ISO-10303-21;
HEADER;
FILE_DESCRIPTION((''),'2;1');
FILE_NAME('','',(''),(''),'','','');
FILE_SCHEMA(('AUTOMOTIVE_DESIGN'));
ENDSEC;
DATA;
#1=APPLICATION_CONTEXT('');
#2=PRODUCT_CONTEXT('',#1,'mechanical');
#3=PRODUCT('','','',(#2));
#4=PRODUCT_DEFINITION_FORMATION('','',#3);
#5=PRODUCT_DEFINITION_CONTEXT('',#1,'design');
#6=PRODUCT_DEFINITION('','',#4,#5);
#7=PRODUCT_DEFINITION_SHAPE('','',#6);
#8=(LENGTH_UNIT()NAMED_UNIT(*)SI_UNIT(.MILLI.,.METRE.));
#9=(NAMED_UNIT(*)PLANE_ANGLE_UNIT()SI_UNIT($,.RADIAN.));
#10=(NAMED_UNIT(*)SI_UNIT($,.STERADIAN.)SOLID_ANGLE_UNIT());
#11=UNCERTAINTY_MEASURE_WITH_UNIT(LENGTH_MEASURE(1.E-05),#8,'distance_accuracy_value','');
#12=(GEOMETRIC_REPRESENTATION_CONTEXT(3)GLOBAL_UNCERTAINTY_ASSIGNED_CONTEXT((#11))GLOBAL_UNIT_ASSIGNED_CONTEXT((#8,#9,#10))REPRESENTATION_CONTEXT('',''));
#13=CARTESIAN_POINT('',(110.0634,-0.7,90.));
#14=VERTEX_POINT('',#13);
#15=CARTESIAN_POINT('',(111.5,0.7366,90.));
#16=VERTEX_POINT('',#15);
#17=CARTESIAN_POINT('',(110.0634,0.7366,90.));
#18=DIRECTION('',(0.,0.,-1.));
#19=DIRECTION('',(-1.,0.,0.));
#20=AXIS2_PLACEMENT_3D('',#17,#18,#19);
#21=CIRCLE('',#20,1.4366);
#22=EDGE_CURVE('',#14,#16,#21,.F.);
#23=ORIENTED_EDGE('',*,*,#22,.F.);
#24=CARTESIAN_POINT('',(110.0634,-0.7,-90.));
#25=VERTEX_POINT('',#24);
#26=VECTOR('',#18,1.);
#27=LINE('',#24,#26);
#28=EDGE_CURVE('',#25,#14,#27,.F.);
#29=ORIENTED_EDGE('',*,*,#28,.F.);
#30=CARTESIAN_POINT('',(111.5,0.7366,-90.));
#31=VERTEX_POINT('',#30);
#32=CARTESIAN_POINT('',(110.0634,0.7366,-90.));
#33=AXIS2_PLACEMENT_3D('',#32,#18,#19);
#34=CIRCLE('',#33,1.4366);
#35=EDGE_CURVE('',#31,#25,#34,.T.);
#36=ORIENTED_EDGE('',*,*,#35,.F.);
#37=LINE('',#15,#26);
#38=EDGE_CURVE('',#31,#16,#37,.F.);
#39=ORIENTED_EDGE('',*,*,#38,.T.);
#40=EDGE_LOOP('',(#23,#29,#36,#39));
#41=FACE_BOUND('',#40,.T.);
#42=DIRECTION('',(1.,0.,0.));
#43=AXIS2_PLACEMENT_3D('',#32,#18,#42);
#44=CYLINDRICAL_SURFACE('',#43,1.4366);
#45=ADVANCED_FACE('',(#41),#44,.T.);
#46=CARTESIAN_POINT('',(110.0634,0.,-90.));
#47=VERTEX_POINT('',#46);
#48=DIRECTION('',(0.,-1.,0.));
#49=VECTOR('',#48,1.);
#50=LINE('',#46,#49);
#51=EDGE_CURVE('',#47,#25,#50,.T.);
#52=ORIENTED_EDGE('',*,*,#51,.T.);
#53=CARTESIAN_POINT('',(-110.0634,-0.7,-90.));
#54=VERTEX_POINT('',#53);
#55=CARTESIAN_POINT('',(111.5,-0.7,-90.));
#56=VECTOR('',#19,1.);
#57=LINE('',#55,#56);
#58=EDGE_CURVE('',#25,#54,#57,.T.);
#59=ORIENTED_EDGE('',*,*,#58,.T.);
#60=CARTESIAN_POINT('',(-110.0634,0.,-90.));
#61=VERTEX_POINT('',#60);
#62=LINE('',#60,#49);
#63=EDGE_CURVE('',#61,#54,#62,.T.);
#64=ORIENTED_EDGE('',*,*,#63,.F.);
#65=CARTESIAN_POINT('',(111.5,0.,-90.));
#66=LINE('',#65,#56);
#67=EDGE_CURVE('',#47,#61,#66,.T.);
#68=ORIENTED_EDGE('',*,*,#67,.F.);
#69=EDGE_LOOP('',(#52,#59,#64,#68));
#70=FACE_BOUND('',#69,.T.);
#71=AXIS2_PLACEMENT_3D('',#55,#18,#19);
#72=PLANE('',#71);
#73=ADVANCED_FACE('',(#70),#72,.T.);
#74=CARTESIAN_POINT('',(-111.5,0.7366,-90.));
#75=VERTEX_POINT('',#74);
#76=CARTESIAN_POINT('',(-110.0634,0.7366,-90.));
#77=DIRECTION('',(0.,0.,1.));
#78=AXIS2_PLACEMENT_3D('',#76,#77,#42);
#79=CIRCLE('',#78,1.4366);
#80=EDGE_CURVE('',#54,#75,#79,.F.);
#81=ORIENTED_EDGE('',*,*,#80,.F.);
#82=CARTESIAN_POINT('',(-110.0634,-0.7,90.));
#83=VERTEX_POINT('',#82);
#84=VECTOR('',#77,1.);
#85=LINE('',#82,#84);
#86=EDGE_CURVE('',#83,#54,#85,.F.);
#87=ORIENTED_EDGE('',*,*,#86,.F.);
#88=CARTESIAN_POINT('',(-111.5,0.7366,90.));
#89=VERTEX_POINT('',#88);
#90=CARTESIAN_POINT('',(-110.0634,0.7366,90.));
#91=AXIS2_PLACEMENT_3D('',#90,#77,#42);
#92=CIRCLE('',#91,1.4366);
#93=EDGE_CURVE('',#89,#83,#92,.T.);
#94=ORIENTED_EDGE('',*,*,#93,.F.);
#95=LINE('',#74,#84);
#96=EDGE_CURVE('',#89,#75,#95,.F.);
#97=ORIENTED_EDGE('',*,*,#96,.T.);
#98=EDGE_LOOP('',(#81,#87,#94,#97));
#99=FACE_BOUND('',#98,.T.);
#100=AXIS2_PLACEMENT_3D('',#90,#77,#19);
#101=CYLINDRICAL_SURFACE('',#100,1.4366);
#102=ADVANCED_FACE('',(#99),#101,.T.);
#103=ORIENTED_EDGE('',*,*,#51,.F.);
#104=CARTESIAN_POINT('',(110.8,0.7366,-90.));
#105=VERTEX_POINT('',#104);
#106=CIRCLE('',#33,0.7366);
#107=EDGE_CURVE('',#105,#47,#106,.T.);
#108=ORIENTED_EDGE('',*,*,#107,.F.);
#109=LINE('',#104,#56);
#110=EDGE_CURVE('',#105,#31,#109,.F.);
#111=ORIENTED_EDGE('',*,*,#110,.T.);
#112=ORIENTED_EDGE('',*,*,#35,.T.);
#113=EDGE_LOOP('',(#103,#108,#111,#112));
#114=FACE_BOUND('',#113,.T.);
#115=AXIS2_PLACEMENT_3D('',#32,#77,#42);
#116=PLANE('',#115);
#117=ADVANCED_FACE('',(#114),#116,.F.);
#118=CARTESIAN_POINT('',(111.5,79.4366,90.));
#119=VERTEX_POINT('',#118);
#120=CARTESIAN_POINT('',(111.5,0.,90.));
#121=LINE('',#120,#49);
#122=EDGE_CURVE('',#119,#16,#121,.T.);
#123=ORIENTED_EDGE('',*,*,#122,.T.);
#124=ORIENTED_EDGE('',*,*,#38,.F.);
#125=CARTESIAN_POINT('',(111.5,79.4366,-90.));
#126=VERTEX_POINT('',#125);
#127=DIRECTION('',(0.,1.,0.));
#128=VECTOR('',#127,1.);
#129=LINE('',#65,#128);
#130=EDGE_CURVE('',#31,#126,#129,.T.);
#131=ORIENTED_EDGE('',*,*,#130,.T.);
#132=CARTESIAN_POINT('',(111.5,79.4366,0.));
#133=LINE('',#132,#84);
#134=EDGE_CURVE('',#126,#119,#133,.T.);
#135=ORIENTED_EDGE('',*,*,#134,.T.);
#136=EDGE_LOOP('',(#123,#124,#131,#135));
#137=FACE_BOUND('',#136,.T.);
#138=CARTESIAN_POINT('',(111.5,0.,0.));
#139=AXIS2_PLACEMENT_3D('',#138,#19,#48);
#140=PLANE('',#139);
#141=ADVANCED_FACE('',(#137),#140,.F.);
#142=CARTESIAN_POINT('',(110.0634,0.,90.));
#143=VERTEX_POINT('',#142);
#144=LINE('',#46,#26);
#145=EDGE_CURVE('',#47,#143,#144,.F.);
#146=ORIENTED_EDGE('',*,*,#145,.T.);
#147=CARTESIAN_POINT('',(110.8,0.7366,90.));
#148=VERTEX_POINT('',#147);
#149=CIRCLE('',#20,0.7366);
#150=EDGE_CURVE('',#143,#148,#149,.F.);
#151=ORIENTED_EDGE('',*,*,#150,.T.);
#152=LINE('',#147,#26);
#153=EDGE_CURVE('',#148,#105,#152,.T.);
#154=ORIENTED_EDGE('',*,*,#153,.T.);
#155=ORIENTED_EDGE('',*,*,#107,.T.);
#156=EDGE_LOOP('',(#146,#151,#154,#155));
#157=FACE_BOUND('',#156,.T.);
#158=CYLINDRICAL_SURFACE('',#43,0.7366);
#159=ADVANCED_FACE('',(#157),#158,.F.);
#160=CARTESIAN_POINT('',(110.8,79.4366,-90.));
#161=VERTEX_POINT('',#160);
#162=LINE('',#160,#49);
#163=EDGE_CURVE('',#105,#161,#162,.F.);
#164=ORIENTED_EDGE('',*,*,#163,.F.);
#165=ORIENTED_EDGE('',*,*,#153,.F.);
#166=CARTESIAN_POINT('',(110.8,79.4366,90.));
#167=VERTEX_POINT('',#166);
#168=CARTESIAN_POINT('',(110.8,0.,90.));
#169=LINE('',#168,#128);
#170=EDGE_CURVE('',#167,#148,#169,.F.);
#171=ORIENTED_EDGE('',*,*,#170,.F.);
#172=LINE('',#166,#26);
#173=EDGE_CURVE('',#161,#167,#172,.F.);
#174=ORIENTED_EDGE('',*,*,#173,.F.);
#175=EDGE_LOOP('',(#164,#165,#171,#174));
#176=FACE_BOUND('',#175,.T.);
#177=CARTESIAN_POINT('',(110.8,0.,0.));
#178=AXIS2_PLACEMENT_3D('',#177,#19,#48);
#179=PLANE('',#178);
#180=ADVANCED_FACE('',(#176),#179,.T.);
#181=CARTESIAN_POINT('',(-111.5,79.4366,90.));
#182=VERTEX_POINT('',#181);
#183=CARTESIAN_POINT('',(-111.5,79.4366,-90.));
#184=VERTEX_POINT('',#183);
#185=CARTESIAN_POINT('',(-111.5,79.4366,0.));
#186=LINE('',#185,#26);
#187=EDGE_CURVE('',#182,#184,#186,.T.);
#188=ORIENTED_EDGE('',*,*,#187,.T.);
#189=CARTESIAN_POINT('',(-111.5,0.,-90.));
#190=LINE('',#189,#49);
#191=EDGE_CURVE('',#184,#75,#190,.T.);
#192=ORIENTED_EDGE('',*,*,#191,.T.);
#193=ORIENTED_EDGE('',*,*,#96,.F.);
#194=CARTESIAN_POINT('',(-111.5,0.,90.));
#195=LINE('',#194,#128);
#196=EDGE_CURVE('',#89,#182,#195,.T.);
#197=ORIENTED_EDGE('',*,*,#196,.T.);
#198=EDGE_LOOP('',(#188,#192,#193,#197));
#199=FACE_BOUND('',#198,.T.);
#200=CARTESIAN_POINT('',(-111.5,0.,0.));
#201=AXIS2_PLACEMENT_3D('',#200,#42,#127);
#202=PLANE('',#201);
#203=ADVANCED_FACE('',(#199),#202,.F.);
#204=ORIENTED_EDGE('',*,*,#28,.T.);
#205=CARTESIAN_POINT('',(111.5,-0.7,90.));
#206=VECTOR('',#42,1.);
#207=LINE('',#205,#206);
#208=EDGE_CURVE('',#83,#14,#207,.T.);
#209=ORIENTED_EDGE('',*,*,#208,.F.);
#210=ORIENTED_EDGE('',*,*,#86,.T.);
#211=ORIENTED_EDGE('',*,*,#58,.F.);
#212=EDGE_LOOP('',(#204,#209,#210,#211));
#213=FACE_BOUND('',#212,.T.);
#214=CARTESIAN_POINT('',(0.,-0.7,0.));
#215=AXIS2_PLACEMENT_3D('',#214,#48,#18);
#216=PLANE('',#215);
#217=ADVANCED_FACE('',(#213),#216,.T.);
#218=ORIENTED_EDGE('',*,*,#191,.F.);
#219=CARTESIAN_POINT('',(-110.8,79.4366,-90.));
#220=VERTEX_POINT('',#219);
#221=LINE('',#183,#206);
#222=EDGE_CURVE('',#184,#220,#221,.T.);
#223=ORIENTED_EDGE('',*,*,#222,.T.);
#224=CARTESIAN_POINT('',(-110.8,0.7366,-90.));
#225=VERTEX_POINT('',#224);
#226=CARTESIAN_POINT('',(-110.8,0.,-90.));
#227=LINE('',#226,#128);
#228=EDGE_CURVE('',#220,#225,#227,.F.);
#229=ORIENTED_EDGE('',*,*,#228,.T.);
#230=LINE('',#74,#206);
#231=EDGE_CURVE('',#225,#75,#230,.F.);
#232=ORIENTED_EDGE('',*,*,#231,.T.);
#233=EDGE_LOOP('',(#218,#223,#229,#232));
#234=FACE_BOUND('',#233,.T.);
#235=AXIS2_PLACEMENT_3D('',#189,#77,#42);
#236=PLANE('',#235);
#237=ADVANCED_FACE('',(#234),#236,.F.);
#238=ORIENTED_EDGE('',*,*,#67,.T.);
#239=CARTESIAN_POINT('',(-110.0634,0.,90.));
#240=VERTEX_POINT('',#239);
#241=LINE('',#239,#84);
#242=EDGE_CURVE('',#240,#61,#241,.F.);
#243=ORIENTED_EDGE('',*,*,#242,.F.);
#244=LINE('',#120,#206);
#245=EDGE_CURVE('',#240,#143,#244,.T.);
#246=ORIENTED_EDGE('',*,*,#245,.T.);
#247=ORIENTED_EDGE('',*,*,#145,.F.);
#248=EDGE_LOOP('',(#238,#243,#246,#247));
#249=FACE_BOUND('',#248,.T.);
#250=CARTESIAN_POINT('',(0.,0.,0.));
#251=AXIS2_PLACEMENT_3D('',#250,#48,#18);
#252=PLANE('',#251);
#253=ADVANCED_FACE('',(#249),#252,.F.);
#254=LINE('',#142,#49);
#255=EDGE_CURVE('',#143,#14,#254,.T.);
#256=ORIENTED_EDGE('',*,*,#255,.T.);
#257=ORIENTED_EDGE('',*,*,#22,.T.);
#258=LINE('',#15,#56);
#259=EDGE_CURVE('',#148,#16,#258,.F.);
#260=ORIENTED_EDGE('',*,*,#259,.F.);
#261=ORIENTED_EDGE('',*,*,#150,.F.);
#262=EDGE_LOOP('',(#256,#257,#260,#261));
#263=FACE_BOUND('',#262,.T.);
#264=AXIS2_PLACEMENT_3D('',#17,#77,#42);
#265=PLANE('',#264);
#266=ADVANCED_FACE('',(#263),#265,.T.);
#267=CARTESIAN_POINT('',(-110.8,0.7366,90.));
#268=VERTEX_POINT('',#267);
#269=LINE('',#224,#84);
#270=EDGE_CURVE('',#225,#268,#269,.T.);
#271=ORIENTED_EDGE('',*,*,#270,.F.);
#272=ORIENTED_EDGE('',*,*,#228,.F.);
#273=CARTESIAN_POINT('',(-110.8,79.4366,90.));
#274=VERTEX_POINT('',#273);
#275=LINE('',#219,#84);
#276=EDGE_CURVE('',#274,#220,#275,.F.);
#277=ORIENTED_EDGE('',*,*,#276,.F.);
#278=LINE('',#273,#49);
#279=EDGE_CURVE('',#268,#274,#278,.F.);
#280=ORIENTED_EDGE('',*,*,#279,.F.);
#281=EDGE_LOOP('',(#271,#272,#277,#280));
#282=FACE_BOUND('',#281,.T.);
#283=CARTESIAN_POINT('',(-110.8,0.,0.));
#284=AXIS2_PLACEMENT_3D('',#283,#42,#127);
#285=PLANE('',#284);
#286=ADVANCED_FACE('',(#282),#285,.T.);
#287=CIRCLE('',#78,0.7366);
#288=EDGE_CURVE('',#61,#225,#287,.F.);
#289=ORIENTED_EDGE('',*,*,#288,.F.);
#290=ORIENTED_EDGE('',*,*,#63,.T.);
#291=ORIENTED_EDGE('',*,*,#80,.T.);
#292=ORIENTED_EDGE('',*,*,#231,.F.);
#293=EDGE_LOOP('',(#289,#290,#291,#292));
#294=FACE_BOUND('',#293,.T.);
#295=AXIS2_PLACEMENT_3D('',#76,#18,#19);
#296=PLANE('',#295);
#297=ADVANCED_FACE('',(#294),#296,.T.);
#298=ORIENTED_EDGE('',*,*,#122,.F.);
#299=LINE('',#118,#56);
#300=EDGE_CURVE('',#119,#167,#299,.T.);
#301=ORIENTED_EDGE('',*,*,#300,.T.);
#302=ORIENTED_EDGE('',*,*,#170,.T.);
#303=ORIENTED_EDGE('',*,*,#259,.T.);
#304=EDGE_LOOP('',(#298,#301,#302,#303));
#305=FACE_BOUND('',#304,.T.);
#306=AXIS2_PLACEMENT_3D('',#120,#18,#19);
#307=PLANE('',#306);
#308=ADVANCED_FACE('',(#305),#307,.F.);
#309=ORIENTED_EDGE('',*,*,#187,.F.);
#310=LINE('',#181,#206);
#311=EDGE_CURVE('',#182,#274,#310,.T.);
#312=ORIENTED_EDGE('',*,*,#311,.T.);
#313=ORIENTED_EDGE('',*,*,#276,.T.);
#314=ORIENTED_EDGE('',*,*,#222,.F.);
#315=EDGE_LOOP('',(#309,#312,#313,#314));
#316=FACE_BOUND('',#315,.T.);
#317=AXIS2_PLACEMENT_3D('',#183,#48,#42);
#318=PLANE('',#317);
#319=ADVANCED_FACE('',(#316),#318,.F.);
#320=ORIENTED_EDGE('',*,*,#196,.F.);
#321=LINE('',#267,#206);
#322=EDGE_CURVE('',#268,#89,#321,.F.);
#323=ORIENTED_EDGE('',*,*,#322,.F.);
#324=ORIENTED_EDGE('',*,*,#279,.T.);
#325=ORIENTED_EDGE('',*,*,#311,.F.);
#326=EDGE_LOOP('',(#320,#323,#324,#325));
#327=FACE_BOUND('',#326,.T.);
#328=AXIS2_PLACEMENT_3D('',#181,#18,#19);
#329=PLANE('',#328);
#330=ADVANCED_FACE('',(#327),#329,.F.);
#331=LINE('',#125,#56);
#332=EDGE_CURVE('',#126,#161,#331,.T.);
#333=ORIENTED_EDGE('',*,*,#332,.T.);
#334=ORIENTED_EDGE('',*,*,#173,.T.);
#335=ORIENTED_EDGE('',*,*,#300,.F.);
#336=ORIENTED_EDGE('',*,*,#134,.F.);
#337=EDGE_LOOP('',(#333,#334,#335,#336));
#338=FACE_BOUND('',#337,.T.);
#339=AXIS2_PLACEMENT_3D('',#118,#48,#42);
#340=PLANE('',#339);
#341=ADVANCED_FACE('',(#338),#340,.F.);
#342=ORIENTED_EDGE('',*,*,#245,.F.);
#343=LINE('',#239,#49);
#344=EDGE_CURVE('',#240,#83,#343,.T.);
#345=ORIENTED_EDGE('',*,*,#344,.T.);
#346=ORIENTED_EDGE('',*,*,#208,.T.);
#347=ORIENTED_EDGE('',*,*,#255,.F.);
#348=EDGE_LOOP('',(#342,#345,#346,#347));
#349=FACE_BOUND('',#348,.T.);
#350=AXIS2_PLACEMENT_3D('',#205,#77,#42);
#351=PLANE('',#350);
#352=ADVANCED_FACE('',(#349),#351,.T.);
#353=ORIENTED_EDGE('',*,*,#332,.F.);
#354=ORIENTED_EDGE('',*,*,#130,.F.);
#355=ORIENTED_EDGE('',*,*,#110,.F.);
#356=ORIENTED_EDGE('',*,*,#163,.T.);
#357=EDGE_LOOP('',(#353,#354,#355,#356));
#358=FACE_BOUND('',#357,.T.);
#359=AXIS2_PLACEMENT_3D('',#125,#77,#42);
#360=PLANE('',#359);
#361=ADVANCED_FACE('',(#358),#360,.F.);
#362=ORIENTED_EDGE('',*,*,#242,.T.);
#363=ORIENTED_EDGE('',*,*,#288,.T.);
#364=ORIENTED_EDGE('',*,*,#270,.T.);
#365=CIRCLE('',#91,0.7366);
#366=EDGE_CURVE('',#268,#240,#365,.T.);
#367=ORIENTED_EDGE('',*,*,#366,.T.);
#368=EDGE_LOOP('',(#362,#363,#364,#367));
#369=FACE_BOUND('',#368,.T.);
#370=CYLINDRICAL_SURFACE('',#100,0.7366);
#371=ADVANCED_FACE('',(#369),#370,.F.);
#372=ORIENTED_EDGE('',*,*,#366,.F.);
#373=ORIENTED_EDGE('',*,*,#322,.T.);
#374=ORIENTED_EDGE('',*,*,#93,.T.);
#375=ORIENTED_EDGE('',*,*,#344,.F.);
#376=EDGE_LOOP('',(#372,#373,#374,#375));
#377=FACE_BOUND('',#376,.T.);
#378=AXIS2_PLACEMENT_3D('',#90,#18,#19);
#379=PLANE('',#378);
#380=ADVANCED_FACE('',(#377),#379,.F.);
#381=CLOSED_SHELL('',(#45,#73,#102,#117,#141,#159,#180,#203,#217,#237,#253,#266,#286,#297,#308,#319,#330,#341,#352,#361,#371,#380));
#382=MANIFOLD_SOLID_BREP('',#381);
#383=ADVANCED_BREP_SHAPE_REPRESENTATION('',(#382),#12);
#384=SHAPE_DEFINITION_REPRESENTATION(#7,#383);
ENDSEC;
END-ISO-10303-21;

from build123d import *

# Parameters (mm, degrees)
SKETCH1_W                      = 223
SKETCH1_H                      = 180
BASE_FLANGE1_DEPTH             = 0.7
EDGE_FLANGE1_STRIP_W           = 4.2732
EDGE_FLANGE1_STRIP_H           = 0.7
EDGE_FLANGE1_STRIP_CUT_DEPTH   = 180
EDGE_FLANGE1_STRIP_2_W         = 4.2732
EDGE_FLANGE1_STRIP_2_H         = 0.7
EDGE_FLANGE1_STRIP_CUT_2_DEPTH = 180
EDGE_FLANGE1_DEPTH             = 180
EDGE_FLANGE1_BEND_DEPTH        = 180


# Sheet-metal steps are written as plain solids
with BuildPart() as part:
    # Sketch1 → Base-Flange1 (new body)
    with BuildSketch(Plane(origin=(0, 0, 0), x_dir=(1, 0, 0), z_dir=(0, 1, 0))):
        Rectangle(SKETCH1_W, SKETCH1_H)
    extrude(amount=-BASE_FLANGE1_DEPTH)

    # Edge-Flange1 strip (across the edge) → Edge-Flange1 strip cut (cut)
    with BuildSketch(Plane(origin=(-111.5, 0, -90), x_dir=(1, 0, 0), z_dir=(0, 0, 1))):
        with Locations((-0.7, -0.35)):
            Rectangle(EDGE_FLANGE1_STRIP_W, EDGE_FLANGE1_STRIP_H)
    extrude(amount=EDGE_FLANGE1_STRIP_CUT_DEPTH, mode=Mode.SUBTRACT)

    # Edge-Flange1 strip 2 (across the edge) → Edge-Flange1 strip cut 2 (cut)
    with BuildSketch(Plane(origin=(111.5, 0, 90), x_dir=(-1, 0, 0), z_dir=(0, 0, -1))):
        with Locations((-0.7, -0.35)):
            Rectangle(EDGE_FLANGE1_STRIP_2_W, EDGE_FLANGE1_STRIP_2_H)
    extrude(amount=EDGE_FLANGE1_STRIP_CUT_2_DEPTH, mode=Mode.SUBTRACT)

    # Edge-Flange1 section (across the edge) → Edge-Flange1 (add)
    with BuildSketch(Plane(origin=(-111.5, 0, -90), x_dir=(1, 0, 0), z_dir=(0, 0, 1))):
        with BuildLine():
            Line((0, 0.7366), (0, 79.4366))
            Line((0, 79.4366), (0.7, 79.4366))
            Line((0.7, 79.4366), (0.7, 0.7366))
            ThreePointArc((0.7, 0.7366), (0.915745145, 0.215745145), (1.4366, 0))
            Line((1.4366, 0), (1.4366, -0.7))
            ThreePointArc((1.4366, -0.7), (0.420770398, -0.279229602), (0, 0.7366))
        make_face()
    extrude(amount=EDGE_FLANGE1_DEPTH)

    # Edge-Flange1 section 2 (across the edge) → Edge-Flange1 bend (add)
    with BuildSketch(Plane(origin=(111.5, 0, 90), x_dir=(-1, 0, 0), z_dir=(0, 0, -1))):
        with BuildLine():
            Line((0, 0.7366), (0, 79.4366))
            Line((0, 79.4366), (0.7, 79.4366))
            Line((0.7, 79.4366), (0.7, 0.7366))
            ThreePointArc((0.7, 0.7366), (0.915745145, 0.215745145), (1.4366, 0))
            Line((1.4366, 0), (1.4366, -0.7))
            ThreePointArc((1.4366, -0.7), (0.420770398, -0.279229602), (0, 0.7366))
        make_face()
    extrude(amount=EDGE_FLANGE1_BEND_DEPTH)


solid = part.part
